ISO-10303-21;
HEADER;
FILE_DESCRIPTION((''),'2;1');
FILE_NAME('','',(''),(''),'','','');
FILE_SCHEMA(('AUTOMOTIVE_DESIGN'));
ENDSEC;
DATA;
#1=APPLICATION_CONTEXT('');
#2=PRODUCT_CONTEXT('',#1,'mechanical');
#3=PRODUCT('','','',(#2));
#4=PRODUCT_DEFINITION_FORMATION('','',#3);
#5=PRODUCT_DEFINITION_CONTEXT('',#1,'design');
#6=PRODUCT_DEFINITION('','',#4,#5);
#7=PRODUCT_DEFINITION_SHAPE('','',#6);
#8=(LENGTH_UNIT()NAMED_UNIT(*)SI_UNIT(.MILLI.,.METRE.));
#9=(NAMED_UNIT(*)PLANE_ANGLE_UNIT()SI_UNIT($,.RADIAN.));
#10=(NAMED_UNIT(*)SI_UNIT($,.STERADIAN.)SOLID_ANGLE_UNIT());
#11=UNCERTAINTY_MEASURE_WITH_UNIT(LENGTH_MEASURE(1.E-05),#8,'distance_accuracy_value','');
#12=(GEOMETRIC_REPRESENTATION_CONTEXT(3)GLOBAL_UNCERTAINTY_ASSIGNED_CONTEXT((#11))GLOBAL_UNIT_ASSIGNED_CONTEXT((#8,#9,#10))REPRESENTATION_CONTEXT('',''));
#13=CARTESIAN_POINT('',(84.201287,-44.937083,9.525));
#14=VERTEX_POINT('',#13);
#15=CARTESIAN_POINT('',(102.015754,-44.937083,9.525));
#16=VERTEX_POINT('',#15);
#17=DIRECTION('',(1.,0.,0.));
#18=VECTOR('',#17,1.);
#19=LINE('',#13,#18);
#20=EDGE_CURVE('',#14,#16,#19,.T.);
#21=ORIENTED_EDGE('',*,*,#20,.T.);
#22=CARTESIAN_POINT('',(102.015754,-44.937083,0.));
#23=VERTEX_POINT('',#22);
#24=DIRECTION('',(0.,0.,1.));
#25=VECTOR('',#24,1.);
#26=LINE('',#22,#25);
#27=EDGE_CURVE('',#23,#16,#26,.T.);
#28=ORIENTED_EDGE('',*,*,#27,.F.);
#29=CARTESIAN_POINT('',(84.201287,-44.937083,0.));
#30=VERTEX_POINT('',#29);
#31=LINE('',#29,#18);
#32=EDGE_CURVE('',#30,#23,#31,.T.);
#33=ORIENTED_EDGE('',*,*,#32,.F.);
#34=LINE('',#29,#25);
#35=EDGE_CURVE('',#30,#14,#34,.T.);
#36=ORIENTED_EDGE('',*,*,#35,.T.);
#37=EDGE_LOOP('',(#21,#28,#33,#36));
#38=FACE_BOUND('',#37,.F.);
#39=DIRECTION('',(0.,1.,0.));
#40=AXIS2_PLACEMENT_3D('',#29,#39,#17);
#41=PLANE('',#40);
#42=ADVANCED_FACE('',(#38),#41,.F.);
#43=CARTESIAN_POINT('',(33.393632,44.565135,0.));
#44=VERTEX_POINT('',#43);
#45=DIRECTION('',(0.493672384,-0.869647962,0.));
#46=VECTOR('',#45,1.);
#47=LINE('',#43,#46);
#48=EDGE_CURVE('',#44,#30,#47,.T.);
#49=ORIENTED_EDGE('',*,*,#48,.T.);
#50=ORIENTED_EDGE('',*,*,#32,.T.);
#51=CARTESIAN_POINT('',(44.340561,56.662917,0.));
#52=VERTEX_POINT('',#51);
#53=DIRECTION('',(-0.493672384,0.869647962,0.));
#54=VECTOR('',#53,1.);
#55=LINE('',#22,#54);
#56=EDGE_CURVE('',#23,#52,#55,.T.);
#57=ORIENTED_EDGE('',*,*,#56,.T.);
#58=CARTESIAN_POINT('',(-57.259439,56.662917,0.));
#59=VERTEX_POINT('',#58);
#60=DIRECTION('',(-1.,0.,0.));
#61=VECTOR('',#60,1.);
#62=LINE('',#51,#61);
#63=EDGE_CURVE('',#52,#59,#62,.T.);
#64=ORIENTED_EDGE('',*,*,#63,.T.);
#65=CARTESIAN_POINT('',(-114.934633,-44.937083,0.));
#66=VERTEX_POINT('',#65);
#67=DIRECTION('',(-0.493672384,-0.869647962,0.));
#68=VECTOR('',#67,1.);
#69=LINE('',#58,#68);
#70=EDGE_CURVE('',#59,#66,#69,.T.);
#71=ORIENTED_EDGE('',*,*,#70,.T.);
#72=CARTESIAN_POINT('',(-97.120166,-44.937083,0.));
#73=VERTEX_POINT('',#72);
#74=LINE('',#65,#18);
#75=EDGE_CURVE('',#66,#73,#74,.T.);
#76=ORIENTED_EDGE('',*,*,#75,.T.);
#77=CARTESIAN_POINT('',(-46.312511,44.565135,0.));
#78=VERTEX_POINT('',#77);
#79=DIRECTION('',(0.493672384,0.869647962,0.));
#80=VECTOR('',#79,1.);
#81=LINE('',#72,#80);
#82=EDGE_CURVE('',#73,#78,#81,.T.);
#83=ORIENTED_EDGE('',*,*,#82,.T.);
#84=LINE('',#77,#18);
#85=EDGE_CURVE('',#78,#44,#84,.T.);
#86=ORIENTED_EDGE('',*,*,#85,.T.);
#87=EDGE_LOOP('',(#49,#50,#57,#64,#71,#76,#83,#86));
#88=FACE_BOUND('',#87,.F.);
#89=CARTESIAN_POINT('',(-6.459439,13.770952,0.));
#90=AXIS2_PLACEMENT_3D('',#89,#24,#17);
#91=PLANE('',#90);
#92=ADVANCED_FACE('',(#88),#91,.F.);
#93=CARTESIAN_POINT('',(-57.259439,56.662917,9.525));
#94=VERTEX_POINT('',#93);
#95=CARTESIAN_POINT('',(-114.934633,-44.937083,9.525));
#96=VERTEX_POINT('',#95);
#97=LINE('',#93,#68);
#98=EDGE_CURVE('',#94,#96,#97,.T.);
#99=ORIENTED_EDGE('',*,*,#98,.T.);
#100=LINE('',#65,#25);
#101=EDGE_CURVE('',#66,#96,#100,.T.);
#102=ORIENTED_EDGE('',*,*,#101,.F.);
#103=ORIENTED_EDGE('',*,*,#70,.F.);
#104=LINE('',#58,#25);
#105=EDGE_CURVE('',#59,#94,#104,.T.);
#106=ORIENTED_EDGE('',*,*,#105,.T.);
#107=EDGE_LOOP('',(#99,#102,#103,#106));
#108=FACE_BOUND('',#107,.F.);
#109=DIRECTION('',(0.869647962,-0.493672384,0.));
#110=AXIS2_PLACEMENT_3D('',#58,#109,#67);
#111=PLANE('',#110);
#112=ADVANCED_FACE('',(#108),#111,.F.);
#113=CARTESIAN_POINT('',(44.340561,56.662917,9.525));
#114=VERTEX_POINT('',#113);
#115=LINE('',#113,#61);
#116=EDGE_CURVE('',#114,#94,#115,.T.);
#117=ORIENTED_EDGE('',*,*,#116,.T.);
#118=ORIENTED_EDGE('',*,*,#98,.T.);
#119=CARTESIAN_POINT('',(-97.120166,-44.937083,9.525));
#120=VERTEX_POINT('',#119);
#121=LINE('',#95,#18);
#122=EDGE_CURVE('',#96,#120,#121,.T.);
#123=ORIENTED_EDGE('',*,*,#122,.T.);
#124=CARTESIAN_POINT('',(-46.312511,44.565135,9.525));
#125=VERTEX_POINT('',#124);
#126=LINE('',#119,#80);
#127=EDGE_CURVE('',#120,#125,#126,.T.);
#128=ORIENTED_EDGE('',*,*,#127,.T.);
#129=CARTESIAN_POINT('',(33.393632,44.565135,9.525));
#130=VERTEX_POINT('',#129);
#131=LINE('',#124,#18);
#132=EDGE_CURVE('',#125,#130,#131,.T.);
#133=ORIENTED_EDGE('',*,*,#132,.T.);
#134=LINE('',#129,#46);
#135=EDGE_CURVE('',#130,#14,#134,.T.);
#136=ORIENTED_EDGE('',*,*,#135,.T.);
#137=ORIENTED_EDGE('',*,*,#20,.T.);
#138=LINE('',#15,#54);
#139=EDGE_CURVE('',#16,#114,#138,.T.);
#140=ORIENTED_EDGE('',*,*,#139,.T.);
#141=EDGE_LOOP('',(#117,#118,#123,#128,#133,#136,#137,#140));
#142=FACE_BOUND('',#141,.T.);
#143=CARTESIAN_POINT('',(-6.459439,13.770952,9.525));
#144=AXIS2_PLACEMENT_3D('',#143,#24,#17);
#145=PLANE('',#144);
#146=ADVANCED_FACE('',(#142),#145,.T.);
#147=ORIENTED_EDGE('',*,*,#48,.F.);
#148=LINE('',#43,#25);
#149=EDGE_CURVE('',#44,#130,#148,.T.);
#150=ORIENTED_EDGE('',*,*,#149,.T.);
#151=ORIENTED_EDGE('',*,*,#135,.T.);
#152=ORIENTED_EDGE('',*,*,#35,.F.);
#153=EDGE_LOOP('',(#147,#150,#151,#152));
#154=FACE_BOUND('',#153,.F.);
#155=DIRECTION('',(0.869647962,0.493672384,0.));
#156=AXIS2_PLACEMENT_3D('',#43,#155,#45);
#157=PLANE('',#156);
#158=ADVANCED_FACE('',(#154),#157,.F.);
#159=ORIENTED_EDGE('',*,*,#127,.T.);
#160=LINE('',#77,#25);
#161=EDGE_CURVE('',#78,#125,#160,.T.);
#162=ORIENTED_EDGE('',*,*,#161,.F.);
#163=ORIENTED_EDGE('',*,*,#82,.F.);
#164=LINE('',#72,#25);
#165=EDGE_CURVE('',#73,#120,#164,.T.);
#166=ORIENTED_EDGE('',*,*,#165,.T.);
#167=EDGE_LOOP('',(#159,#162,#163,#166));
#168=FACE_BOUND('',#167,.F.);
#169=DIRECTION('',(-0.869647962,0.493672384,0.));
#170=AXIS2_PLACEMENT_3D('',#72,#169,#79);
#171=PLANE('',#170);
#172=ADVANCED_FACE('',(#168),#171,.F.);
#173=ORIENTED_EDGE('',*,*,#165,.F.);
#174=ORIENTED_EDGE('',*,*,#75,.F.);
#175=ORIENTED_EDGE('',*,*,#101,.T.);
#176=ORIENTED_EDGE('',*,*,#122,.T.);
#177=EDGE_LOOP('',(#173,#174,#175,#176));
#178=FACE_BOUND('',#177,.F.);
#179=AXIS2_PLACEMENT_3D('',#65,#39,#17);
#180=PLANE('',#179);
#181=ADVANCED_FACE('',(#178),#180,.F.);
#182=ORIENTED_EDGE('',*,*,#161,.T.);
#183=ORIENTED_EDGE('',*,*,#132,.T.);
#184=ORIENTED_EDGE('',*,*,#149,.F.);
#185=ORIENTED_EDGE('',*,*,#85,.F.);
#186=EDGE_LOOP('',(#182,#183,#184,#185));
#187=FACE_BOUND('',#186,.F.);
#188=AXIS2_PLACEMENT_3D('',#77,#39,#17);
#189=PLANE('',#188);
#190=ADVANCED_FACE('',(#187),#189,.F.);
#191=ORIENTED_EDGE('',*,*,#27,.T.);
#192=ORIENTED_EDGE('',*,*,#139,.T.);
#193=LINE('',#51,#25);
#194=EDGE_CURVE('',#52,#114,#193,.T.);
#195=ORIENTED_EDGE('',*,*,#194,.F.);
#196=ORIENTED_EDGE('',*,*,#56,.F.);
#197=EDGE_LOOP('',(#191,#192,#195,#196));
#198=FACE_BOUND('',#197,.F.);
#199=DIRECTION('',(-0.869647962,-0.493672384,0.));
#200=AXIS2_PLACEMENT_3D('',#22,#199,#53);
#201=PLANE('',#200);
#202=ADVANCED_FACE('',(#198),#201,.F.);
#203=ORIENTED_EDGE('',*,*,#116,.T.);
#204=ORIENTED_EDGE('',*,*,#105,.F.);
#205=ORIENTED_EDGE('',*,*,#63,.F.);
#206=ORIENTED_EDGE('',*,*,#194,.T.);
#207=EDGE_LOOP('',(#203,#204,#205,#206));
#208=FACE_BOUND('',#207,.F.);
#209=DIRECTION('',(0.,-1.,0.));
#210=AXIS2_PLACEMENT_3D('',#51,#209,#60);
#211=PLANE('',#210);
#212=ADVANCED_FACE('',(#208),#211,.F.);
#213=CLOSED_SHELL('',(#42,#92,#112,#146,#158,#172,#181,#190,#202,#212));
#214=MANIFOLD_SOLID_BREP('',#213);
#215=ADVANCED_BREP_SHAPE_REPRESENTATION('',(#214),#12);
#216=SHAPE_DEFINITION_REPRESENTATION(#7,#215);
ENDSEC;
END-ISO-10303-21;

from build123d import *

# Parameters (mm, degrees)
F1_DEPTH = 9.525


# Not quite as in the source:
# - a length typed as a fraction of an inch, garbled in the dataset ("3 / 203.2 mm" for 3/8 in), is restored
# - a feature names something its author has since deleted; it is built from what else it names


with BuildPart() as f1:
    # F0 (on Top) → F1 (new body)
    with BuildSketch(Plane.XY):
        Polygon((44.3405605153, 56.6629169657), (-6.4594394847, 56.6629169657), (-57.2594394847, 56.6629169657), (-114.934632644, -44.9370830343), (-97.1201658249, -44.9370830343), (-46.3125111366, 44.5651350522), (-6.4594394847, 44.5651350522), (33.3936321673, 44.5651350522), (84.2012868556, -44.9370830343), (102.0157536747, -44.9370830343), align=None)
    extrude(amount=F1_DEPTH)


solid = f1.part
